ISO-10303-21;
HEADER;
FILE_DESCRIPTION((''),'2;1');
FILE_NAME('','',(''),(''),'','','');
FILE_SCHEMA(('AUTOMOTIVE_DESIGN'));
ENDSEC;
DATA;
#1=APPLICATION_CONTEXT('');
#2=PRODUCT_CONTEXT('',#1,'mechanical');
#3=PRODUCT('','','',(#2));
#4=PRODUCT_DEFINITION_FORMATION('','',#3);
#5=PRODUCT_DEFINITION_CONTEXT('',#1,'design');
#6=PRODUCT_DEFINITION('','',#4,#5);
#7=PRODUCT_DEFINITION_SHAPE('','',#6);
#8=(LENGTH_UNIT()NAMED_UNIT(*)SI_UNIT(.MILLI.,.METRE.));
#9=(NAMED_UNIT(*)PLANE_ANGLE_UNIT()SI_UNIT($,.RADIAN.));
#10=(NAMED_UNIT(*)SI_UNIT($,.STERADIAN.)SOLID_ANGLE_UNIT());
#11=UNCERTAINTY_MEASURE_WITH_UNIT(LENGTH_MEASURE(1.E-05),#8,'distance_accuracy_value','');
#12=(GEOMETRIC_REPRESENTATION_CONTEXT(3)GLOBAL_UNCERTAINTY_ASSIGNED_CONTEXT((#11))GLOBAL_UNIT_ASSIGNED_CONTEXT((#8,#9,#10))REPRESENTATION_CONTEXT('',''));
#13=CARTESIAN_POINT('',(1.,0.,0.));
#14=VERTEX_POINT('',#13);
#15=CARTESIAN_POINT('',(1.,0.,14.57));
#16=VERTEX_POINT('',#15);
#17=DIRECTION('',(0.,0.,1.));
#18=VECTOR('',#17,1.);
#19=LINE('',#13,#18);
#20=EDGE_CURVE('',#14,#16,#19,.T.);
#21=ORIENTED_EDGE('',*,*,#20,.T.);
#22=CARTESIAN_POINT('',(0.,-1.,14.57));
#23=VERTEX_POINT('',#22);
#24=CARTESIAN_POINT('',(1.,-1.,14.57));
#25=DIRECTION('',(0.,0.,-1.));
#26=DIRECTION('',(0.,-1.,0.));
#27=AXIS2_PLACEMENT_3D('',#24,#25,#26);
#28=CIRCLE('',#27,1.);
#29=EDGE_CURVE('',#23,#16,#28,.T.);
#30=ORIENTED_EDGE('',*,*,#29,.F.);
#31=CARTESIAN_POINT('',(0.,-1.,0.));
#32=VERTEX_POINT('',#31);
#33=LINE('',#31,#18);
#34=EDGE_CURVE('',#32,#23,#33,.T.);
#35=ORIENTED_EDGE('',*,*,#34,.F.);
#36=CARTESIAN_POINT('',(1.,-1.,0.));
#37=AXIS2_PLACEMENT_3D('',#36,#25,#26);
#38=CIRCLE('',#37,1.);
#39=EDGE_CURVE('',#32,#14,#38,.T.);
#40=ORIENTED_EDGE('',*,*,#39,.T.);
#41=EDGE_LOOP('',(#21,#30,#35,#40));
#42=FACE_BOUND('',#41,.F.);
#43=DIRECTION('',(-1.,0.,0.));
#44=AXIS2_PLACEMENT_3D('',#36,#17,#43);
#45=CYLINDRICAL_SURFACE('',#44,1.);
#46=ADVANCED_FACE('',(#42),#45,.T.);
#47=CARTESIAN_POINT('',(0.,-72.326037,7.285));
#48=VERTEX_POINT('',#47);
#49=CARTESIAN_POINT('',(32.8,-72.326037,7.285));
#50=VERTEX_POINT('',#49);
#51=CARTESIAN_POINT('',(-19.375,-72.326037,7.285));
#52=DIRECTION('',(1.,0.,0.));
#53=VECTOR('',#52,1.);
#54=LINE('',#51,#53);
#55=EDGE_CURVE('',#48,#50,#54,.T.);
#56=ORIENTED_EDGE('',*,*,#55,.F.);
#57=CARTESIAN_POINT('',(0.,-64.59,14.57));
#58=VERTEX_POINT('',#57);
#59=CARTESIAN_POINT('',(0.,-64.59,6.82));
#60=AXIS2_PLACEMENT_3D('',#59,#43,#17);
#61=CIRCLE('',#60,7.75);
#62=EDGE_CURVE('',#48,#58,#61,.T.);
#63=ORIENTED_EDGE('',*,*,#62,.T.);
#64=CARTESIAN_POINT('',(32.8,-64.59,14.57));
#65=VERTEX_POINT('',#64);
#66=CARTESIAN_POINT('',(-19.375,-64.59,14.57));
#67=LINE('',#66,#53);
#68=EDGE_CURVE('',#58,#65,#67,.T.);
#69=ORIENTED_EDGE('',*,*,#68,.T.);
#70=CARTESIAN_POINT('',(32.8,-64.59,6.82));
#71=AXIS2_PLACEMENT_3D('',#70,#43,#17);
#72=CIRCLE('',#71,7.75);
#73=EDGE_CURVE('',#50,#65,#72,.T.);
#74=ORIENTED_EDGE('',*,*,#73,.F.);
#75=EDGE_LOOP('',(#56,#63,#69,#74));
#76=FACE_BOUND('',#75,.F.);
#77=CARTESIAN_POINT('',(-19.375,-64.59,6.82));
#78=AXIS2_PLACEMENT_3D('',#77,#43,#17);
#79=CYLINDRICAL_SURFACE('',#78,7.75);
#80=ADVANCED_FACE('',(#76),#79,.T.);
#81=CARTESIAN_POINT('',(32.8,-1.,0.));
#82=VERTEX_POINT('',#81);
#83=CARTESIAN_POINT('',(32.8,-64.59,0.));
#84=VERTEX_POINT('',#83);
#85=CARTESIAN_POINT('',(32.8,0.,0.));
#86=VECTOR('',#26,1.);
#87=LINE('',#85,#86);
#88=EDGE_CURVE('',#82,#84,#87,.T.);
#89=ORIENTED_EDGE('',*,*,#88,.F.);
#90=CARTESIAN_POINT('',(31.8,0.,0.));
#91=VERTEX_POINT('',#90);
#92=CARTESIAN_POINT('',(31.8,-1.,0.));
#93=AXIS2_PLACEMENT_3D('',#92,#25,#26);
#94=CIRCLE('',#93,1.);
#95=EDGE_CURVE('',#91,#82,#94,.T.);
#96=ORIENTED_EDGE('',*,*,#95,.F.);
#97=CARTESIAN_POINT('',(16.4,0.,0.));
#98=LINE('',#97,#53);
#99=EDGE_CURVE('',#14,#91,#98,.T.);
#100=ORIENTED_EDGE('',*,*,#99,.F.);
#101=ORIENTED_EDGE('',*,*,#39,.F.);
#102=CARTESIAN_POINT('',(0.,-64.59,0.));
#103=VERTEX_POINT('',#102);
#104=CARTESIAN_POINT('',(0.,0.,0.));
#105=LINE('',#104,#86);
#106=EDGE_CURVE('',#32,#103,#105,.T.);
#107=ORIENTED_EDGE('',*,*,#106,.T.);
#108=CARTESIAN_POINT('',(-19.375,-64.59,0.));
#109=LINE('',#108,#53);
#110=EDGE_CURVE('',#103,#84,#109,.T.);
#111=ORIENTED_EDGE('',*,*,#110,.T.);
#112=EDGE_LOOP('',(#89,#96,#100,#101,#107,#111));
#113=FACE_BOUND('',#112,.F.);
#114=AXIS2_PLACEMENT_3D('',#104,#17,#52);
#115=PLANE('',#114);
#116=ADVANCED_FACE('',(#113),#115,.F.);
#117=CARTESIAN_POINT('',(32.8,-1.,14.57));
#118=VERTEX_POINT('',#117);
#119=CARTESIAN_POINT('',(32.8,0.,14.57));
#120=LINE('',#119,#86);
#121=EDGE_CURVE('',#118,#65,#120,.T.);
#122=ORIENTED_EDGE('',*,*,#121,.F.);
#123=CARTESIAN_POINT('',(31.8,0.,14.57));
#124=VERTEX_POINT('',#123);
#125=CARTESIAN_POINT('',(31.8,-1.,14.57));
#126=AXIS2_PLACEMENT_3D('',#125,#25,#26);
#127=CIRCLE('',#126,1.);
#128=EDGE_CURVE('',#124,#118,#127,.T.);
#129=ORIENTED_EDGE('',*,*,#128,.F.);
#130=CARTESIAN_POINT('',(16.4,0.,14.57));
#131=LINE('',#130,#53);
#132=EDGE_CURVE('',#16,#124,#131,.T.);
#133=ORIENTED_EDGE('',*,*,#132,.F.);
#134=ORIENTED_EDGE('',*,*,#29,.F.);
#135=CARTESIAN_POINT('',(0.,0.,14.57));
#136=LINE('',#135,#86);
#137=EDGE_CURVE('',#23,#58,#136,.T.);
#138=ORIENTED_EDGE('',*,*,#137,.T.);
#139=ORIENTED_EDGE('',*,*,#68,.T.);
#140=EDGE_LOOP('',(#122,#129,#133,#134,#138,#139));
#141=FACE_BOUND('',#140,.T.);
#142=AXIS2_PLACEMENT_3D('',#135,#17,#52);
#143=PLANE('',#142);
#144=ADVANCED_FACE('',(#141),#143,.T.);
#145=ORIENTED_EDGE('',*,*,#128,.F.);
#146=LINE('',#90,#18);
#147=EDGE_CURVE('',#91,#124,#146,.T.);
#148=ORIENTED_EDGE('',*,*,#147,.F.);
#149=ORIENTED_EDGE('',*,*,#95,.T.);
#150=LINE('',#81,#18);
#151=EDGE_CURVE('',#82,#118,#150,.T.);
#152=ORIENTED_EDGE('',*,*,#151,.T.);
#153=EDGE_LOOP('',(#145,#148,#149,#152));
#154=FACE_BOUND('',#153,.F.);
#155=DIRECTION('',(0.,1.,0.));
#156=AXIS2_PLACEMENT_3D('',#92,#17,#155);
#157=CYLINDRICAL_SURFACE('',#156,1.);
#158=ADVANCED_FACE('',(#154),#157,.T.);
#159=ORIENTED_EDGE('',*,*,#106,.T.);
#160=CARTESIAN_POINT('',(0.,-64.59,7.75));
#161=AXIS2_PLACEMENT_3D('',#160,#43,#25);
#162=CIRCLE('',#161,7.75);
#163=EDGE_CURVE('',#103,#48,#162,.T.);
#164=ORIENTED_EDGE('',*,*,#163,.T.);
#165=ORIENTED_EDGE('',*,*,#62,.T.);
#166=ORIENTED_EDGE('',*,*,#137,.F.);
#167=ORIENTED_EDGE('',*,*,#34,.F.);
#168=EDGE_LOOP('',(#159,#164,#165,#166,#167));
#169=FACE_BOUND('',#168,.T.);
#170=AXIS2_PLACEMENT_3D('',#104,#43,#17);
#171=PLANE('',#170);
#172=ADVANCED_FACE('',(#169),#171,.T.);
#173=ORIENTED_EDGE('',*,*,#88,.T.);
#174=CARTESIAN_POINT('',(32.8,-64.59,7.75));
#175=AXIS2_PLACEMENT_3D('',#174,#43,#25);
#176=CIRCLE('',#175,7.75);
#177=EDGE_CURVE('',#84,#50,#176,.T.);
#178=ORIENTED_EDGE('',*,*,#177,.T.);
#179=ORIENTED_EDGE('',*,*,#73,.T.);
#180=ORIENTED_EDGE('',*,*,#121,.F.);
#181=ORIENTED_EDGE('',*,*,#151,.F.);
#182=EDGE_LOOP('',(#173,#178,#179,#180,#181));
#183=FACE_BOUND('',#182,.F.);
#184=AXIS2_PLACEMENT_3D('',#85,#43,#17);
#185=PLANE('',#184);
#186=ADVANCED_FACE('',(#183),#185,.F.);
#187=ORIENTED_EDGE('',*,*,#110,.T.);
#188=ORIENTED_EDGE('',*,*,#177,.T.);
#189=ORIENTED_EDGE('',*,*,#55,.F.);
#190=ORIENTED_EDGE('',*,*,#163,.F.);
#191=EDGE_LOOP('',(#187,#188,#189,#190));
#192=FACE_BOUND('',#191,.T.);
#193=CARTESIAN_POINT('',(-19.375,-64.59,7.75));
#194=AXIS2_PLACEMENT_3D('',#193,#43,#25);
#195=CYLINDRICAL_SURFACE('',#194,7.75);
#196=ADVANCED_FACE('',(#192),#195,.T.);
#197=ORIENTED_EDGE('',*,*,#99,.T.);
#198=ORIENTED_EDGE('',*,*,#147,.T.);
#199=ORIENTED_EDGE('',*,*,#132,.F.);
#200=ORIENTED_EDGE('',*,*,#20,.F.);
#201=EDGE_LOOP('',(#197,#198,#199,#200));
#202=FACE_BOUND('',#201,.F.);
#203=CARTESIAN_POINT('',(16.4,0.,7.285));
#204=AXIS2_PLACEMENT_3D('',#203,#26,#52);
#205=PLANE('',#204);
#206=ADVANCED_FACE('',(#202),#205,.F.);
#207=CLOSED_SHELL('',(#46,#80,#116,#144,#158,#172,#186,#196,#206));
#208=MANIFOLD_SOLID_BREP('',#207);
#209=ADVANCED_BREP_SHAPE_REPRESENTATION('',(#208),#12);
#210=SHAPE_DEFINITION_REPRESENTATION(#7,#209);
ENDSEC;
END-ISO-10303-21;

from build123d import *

# Parameters (mm, degrees)
F0_W        = 32.8
F0_H        = 14.57
F1_DEPTH    = 72.34
F2_T1_DEPTH = 71.55
F3_R        = 1


# Not quite as in the source:
# - a fillet or chamfer that OpenCascade refuses, or shapes differently, is made with other operations: its cross-section is extruded or revolved along the edge and cut away or added


with BuildPart() as f1:
    # F0 (on Front) → F1 (new body)
    with BuildSketch(Plane.XZ):
        with Locations((16.4, 7.285)):
            Rectangle(F0_W, F0_H)
    extrude(amount=F1_DEPTH)

    # F2: fillet of radius 7.75 on 2 edges, made by hand

    # F2_s2 → F2_t1 (cut)
    with BuildSketch(Plane.YZ.offset(-19.375)):
        with BuildLine():
            ThreePointArc((-64.59, 14.57), (-70.0700775542, 12.3000775542), (-72.34, 6.82))
            Line((-72.34, 6.82), (-72.34, 14.57))
            Line((-72.34, 14.57), (-64.59, 14.57))
        make_face()
        with BuildLine():
            ThreePointArc((-64.59, 0), (-70.0700775542, 2.2699224458), (-72.34, 7.75))
            Line((-72.34, 7.75), (-72.34, 0))
            Line((-72.34, 0), (-64.59, 0))
        make_face()
    extrude(amount=F2_T1_DEPTH, mode=Mode.SUBTRACT)

    # F3
    f3_edges = [f1.edges().sort_by_distance(p)[0] for p in [
        (0, 0, 7.285),
        (32.8, 0, 7.285),
    ]]
    fillet(f3_edges, radius=F3_R)


solid = f1.part
